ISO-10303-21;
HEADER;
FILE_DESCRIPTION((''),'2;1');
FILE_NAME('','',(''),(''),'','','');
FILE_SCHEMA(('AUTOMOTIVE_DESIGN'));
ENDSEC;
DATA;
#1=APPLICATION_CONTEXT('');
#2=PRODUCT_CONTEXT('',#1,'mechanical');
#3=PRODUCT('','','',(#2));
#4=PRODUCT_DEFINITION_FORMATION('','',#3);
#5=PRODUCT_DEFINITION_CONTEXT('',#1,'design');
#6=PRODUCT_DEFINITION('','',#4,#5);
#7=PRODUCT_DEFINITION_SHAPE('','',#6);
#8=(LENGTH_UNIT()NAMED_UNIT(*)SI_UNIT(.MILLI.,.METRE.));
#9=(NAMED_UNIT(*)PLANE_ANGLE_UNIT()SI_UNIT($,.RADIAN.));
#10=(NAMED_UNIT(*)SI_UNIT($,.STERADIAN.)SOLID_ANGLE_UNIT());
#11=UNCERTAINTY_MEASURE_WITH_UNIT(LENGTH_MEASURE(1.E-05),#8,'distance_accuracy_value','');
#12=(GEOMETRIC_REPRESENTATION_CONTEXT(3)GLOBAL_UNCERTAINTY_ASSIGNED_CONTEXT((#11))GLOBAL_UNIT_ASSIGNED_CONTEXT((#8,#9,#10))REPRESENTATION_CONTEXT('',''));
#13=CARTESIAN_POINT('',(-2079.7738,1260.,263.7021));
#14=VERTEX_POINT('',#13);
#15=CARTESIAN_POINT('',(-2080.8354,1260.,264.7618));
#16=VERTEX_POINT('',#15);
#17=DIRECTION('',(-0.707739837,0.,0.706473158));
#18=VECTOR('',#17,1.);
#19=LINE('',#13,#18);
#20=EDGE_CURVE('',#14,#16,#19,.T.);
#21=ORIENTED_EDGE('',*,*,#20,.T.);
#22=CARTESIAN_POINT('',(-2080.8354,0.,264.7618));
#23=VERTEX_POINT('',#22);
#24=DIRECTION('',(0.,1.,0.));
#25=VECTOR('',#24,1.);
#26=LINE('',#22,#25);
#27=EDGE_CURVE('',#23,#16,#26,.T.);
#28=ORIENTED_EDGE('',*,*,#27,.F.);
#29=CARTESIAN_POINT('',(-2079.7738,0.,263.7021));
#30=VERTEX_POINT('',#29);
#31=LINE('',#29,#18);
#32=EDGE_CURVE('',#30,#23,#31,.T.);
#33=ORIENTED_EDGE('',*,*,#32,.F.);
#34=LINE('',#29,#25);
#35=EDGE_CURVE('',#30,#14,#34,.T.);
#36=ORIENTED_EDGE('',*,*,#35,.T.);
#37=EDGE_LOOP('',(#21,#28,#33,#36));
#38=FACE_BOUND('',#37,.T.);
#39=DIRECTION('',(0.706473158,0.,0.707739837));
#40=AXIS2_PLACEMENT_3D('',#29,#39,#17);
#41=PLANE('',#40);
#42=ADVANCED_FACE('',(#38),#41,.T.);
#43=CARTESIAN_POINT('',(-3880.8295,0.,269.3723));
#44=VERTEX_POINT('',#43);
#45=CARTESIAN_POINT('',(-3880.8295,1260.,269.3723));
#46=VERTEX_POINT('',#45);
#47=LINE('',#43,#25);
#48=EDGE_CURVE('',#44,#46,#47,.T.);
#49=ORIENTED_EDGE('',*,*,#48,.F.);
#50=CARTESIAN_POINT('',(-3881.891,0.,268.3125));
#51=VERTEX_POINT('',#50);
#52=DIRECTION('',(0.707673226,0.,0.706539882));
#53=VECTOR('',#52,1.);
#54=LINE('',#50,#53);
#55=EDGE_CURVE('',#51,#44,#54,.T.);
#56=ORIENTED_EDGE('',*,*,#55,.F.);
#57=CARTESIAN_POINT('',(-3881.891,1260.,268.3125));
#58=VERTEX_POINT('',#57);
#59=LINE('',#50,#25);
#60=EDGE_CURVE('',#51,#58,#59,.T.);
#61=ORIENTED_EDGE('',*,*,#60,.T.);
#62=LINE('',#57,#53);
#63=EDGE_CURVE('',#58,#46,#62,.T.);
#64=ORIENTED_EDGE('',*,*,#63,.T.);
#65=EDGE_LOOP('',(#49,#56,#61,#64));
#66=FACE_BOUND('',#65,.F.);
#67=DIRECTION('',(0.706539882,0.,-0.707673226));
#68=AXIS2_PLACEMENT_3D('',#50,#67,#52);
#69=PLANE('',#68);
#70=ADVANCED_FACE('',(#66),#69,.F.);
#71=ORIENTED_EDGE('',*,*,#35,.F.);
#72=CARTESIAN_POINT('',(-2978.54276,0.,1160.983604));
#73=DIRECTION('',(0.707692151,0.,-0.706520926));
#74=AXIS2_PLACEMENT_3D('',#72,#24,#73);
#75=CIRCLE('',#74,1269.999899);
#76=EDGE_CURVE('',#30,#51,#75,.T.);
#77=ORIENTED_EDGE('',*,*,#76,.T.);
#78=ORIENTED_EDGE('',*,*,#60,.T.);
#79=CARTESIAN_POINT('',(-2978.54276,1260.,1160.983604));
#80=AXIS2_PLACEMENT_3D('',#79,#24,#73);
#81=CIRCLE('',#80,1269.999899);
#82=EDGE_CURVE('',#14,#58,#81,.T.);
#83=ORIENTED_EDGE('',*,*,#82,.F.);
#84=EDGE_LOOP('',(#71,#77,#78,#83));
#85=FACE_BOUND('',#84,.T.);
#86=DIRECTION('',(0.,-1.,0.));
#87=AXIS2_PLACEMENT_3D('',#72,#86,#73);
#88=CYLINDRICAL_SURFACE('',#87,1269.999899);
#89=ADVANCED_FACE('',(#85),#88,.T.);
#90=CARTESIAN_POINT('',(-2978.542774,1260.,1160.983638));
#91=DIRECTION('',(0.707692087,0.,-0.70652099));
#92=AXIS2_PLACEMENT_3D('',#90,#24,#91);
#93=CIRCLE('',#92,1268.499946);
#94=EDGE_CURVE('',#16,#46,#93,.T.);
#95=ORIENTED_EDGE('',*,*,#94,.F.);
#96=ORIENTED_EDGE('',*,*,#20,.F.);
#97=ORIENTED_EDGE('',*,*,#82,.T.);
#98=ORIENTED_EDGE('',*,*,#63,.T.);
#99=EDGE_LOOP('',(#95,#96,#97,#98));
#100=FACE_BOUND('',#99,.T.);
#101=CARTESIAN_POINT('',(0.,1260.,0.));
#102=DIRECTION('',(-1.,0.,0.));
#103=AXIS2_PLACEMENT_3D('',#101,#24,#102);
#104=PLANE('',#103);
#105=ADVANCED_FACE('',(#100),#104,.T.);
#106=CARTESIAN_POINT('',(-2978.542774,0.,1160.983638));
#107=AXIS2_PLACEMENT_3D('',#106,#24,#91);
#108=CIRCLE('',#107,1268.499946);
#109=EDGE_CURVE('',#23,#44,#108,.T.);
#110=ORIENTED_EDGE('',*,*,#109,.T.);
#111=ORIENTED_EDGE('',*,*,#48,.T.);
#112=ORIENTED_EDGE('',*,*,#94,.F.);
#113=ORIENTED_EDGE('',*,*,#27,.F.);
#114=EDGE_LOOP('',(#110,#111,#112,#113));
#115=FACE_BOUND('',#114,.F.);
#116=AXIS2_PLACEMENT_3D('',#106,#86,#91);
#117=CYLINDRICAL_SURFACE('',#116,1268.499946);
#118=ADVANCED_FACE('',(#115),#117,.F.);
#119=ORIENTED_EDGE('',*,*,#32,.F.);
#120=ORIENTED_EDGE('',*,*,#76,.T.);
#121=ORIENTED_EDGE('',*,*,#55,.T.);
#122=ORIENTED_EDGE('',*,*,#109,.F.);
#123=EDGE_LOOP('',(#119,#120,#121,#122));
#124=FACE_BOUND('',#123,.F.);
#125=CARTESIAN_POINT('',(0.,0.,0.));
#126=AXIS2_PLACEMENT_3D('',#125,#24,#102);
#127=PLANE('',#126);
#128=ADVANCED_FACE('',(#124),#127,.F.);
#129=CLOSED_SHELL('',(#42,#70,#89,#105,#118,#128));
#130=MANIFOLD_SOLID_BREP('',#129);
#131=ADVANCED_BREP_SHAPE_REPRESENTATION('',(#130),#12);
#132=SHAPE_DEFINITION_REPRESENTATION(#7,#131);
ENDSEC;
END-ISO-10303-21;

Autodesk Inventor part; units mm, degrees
ref_plane "YZ Plane" through (0, 0, 0) normal (1, 0, 0) x (0, 1, 0)
ref_plane "XZ Plane" through (0, 0, 0) normal (0, 1, 0) x (-1, 0, 0)
ref_plane "XY Plane" through (0, 0, 0) normal (0, 0, 1) x (1, 0, 0)
sketch "Sketch1" plane through (0, 0, 0) normal (0, 1, 0) x (-1, 0, 0)
  arc A0 (2079.7738, 263.7021) -> (3881.891, 268.3125) centre (2978.5428, 1160.9837) ccw
  arc A1 (2080.8354, 264.7618) -> (3880.8295, 269.3723) centre (2978.5428, 1160.9837) ccw
  line L0 (3881.891, 268.3125) -> (3880.8295, 269.3723)
  line L1 (2079.7738, 263.7021) -> (2080.8354, 264.7618)
  point P0 (0, 0)
  dimension "d9" = 1.5
  dimension "d16" = 1800
  dimension "d22" = 1270
extrude "Extrusion1" add sketch "Sketch1" along normal blind 1260
properties part number "lamina-inox"
